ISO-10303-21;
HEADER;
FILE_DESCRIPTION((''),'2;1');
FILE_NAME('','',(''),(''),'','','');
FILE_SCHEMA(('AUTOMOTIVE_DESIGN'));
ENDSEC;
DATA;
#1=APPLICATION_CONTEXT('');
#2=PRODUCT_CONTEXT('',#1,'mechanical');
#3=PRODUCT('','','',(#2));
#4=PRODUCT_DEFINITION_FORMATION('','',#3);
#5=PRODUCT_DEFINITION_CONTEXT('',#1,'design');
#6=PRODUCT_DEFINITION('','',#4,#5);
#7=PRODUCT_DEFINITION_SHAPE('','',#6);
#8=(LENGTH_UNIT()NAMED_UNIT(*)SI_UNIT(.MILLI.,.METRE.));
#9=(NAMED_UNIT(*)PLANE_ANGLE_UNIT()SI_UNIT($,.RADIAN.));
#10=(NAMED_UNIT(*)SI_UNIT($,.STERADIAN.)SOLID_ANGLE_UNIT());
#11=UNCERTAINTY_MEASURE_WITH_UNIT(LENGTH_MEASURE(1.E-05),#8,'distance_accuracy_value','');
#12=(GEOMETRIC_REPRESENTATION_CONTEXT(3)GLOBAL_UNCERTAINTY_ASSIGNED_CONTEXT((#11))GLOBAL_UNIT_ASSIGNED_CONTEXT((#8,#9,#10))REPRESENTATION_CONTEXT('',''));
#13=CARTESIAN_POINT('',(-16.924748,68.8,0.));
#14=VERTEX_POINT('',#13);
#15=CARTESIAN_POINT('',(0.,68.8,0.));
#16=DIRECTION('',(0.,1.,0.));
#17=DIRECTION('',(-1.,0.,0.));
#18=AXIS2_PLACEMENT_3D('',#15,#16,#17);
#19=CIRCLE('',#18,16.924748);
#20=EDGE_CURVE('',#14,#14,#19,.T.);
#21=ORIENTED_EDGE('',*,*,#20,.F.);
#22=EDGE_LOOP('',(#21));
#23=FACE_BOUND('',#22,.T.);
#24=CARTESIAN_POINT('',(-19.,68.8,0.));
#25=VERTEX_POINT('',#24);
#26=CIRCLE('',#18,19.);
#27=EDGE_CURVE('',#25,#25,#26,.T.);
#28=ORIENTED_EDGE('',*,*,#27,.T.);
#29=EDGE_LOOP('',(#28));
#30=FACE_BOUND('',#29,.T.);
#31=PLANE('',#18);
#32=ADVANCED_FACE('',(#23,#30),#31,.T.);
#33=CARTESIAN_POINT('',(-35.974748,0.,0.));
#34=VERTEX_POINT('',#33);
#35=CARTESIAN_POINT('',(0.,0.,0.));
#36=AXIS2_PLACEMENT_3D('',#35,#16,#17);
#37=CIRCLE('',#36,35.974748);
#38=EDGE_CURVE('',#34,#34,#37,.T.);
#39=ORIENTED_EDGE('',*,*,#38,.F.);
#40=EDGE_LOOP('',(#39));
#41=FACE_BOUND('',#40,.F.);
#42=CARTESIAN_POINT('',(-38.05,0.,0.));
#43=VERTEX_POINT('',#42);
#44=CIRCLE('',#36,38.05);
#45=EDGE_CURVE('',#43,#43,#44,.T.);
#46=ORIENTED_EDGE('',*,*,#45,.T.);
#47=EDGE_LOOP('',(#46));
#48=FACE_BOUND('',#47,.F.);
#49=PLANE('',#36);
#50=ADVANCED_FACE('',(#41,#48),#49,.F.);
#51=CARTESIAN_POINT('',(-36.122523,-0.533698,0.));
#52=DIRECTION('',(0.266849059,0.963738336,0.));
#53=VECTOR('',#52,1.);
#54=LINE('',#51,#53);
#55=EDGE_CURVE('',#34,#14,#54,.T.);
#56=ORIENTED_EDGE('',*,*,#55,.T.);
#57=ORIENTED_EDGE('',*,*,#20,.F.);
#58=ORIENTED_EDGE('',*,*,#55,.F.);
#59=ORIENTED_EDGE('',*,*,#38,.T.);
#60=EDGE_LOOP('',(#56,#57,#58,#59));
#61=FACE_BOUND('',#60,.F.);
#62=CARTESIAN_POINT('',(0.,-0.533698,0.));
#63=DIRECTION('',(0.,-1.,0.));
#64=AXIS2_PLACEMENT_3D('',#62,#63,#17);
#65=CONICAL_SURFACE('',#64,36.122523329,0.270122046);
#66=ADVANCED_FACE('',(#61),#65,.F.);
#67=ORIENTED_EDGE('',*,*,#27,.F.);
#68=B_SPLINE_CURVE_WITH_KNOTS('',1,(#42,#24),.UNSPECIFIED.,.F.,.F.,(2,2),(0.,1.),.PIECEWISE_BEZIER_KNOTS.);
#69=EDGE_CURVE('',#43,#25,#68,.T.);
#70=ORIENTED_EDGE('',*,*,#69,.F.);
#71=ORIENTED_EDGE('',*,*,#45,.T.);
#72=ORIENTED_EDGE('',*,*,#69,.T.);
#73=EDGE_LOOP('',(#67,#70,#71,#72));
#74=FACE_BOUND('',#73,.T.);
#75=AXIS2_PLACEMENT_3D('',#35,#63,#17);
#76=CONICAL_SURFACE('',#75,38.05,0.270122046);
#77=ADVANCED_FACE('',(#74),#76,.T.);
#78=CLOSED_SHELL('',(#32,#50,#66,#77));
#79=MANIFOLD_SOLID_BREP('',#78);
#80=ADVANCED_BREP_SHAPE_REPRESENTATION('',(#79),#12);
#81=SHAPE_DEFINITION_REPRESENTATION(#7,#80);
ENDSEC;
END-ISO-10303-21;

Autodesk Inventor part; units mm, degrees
ref_plane "YZ Plane" through (0, 0, 0) normal (1, 0, 0) x (0, 1, 0)
ref_plane "XY Plane" through (0, 0, 0) normal (0, 0, 1) x (1, 0, 0)
sketch "Szkic6" plane through (0, 0, 0) normal (0, 1, 0) x (-1, 0, 0)
  circle A0 centre (0, 0) radius 38.05
  dimension "d33" = 76.1
ref_plane "Płaszczyzna konstrukcyjna1" through (0, 68.8, 0) normal (0, 1, 0) x (-1, 0, 0)
sketch "Szkic7" plane through (0, 68.8, 0) normal (0, 1, 0) x (-1, 0, 0)
  circle A0 centre (0, 0) radius 19
  dimension "d35" = 38
loft "Wyciągnięcie złożone1" add profiles "Szkic6", "Szkic7"
shell "Skorupa1" thickness 2 removed faces 2 at (-4.7406, 68.8, -4.1998) at (-5.8996, 0, 7.9079)
equation "\"d33\" = OD1"
equation "\"d35\" = OD2"
equation "\"d52\" = THK"
equation "\"SzerokośćGięciaPodcięcia\" = Grubość"
equation "\"RozmiarPodcięciaNarożnika\" = 4 * Grubość"
equation "\"PromieńPrzejścia\" = PromieńGięcia"
equation "\"Rozmiar_promienia_Jacobiego\" = PromieńGięcia"
equation "\"Wielk_odstępu\" = Grubość"
equation "\"d2\" = PromieńGięcia"
equation "\"d23\" = PromieńGięcia"
equation "\"OD1\" = 76.1"
equation "\"OD2\" = 38"
equation "\"L\" = 68.8"
equation "\"THK\" = 2"
equation "\"d34\" = L"
equation "\"Grubość\" = 1.5"
equation "\"PromieńGięcia\" = 3"
properties part number "Redukcja symetryczna Ø76,1x38x2 L=68,8" material "304"
